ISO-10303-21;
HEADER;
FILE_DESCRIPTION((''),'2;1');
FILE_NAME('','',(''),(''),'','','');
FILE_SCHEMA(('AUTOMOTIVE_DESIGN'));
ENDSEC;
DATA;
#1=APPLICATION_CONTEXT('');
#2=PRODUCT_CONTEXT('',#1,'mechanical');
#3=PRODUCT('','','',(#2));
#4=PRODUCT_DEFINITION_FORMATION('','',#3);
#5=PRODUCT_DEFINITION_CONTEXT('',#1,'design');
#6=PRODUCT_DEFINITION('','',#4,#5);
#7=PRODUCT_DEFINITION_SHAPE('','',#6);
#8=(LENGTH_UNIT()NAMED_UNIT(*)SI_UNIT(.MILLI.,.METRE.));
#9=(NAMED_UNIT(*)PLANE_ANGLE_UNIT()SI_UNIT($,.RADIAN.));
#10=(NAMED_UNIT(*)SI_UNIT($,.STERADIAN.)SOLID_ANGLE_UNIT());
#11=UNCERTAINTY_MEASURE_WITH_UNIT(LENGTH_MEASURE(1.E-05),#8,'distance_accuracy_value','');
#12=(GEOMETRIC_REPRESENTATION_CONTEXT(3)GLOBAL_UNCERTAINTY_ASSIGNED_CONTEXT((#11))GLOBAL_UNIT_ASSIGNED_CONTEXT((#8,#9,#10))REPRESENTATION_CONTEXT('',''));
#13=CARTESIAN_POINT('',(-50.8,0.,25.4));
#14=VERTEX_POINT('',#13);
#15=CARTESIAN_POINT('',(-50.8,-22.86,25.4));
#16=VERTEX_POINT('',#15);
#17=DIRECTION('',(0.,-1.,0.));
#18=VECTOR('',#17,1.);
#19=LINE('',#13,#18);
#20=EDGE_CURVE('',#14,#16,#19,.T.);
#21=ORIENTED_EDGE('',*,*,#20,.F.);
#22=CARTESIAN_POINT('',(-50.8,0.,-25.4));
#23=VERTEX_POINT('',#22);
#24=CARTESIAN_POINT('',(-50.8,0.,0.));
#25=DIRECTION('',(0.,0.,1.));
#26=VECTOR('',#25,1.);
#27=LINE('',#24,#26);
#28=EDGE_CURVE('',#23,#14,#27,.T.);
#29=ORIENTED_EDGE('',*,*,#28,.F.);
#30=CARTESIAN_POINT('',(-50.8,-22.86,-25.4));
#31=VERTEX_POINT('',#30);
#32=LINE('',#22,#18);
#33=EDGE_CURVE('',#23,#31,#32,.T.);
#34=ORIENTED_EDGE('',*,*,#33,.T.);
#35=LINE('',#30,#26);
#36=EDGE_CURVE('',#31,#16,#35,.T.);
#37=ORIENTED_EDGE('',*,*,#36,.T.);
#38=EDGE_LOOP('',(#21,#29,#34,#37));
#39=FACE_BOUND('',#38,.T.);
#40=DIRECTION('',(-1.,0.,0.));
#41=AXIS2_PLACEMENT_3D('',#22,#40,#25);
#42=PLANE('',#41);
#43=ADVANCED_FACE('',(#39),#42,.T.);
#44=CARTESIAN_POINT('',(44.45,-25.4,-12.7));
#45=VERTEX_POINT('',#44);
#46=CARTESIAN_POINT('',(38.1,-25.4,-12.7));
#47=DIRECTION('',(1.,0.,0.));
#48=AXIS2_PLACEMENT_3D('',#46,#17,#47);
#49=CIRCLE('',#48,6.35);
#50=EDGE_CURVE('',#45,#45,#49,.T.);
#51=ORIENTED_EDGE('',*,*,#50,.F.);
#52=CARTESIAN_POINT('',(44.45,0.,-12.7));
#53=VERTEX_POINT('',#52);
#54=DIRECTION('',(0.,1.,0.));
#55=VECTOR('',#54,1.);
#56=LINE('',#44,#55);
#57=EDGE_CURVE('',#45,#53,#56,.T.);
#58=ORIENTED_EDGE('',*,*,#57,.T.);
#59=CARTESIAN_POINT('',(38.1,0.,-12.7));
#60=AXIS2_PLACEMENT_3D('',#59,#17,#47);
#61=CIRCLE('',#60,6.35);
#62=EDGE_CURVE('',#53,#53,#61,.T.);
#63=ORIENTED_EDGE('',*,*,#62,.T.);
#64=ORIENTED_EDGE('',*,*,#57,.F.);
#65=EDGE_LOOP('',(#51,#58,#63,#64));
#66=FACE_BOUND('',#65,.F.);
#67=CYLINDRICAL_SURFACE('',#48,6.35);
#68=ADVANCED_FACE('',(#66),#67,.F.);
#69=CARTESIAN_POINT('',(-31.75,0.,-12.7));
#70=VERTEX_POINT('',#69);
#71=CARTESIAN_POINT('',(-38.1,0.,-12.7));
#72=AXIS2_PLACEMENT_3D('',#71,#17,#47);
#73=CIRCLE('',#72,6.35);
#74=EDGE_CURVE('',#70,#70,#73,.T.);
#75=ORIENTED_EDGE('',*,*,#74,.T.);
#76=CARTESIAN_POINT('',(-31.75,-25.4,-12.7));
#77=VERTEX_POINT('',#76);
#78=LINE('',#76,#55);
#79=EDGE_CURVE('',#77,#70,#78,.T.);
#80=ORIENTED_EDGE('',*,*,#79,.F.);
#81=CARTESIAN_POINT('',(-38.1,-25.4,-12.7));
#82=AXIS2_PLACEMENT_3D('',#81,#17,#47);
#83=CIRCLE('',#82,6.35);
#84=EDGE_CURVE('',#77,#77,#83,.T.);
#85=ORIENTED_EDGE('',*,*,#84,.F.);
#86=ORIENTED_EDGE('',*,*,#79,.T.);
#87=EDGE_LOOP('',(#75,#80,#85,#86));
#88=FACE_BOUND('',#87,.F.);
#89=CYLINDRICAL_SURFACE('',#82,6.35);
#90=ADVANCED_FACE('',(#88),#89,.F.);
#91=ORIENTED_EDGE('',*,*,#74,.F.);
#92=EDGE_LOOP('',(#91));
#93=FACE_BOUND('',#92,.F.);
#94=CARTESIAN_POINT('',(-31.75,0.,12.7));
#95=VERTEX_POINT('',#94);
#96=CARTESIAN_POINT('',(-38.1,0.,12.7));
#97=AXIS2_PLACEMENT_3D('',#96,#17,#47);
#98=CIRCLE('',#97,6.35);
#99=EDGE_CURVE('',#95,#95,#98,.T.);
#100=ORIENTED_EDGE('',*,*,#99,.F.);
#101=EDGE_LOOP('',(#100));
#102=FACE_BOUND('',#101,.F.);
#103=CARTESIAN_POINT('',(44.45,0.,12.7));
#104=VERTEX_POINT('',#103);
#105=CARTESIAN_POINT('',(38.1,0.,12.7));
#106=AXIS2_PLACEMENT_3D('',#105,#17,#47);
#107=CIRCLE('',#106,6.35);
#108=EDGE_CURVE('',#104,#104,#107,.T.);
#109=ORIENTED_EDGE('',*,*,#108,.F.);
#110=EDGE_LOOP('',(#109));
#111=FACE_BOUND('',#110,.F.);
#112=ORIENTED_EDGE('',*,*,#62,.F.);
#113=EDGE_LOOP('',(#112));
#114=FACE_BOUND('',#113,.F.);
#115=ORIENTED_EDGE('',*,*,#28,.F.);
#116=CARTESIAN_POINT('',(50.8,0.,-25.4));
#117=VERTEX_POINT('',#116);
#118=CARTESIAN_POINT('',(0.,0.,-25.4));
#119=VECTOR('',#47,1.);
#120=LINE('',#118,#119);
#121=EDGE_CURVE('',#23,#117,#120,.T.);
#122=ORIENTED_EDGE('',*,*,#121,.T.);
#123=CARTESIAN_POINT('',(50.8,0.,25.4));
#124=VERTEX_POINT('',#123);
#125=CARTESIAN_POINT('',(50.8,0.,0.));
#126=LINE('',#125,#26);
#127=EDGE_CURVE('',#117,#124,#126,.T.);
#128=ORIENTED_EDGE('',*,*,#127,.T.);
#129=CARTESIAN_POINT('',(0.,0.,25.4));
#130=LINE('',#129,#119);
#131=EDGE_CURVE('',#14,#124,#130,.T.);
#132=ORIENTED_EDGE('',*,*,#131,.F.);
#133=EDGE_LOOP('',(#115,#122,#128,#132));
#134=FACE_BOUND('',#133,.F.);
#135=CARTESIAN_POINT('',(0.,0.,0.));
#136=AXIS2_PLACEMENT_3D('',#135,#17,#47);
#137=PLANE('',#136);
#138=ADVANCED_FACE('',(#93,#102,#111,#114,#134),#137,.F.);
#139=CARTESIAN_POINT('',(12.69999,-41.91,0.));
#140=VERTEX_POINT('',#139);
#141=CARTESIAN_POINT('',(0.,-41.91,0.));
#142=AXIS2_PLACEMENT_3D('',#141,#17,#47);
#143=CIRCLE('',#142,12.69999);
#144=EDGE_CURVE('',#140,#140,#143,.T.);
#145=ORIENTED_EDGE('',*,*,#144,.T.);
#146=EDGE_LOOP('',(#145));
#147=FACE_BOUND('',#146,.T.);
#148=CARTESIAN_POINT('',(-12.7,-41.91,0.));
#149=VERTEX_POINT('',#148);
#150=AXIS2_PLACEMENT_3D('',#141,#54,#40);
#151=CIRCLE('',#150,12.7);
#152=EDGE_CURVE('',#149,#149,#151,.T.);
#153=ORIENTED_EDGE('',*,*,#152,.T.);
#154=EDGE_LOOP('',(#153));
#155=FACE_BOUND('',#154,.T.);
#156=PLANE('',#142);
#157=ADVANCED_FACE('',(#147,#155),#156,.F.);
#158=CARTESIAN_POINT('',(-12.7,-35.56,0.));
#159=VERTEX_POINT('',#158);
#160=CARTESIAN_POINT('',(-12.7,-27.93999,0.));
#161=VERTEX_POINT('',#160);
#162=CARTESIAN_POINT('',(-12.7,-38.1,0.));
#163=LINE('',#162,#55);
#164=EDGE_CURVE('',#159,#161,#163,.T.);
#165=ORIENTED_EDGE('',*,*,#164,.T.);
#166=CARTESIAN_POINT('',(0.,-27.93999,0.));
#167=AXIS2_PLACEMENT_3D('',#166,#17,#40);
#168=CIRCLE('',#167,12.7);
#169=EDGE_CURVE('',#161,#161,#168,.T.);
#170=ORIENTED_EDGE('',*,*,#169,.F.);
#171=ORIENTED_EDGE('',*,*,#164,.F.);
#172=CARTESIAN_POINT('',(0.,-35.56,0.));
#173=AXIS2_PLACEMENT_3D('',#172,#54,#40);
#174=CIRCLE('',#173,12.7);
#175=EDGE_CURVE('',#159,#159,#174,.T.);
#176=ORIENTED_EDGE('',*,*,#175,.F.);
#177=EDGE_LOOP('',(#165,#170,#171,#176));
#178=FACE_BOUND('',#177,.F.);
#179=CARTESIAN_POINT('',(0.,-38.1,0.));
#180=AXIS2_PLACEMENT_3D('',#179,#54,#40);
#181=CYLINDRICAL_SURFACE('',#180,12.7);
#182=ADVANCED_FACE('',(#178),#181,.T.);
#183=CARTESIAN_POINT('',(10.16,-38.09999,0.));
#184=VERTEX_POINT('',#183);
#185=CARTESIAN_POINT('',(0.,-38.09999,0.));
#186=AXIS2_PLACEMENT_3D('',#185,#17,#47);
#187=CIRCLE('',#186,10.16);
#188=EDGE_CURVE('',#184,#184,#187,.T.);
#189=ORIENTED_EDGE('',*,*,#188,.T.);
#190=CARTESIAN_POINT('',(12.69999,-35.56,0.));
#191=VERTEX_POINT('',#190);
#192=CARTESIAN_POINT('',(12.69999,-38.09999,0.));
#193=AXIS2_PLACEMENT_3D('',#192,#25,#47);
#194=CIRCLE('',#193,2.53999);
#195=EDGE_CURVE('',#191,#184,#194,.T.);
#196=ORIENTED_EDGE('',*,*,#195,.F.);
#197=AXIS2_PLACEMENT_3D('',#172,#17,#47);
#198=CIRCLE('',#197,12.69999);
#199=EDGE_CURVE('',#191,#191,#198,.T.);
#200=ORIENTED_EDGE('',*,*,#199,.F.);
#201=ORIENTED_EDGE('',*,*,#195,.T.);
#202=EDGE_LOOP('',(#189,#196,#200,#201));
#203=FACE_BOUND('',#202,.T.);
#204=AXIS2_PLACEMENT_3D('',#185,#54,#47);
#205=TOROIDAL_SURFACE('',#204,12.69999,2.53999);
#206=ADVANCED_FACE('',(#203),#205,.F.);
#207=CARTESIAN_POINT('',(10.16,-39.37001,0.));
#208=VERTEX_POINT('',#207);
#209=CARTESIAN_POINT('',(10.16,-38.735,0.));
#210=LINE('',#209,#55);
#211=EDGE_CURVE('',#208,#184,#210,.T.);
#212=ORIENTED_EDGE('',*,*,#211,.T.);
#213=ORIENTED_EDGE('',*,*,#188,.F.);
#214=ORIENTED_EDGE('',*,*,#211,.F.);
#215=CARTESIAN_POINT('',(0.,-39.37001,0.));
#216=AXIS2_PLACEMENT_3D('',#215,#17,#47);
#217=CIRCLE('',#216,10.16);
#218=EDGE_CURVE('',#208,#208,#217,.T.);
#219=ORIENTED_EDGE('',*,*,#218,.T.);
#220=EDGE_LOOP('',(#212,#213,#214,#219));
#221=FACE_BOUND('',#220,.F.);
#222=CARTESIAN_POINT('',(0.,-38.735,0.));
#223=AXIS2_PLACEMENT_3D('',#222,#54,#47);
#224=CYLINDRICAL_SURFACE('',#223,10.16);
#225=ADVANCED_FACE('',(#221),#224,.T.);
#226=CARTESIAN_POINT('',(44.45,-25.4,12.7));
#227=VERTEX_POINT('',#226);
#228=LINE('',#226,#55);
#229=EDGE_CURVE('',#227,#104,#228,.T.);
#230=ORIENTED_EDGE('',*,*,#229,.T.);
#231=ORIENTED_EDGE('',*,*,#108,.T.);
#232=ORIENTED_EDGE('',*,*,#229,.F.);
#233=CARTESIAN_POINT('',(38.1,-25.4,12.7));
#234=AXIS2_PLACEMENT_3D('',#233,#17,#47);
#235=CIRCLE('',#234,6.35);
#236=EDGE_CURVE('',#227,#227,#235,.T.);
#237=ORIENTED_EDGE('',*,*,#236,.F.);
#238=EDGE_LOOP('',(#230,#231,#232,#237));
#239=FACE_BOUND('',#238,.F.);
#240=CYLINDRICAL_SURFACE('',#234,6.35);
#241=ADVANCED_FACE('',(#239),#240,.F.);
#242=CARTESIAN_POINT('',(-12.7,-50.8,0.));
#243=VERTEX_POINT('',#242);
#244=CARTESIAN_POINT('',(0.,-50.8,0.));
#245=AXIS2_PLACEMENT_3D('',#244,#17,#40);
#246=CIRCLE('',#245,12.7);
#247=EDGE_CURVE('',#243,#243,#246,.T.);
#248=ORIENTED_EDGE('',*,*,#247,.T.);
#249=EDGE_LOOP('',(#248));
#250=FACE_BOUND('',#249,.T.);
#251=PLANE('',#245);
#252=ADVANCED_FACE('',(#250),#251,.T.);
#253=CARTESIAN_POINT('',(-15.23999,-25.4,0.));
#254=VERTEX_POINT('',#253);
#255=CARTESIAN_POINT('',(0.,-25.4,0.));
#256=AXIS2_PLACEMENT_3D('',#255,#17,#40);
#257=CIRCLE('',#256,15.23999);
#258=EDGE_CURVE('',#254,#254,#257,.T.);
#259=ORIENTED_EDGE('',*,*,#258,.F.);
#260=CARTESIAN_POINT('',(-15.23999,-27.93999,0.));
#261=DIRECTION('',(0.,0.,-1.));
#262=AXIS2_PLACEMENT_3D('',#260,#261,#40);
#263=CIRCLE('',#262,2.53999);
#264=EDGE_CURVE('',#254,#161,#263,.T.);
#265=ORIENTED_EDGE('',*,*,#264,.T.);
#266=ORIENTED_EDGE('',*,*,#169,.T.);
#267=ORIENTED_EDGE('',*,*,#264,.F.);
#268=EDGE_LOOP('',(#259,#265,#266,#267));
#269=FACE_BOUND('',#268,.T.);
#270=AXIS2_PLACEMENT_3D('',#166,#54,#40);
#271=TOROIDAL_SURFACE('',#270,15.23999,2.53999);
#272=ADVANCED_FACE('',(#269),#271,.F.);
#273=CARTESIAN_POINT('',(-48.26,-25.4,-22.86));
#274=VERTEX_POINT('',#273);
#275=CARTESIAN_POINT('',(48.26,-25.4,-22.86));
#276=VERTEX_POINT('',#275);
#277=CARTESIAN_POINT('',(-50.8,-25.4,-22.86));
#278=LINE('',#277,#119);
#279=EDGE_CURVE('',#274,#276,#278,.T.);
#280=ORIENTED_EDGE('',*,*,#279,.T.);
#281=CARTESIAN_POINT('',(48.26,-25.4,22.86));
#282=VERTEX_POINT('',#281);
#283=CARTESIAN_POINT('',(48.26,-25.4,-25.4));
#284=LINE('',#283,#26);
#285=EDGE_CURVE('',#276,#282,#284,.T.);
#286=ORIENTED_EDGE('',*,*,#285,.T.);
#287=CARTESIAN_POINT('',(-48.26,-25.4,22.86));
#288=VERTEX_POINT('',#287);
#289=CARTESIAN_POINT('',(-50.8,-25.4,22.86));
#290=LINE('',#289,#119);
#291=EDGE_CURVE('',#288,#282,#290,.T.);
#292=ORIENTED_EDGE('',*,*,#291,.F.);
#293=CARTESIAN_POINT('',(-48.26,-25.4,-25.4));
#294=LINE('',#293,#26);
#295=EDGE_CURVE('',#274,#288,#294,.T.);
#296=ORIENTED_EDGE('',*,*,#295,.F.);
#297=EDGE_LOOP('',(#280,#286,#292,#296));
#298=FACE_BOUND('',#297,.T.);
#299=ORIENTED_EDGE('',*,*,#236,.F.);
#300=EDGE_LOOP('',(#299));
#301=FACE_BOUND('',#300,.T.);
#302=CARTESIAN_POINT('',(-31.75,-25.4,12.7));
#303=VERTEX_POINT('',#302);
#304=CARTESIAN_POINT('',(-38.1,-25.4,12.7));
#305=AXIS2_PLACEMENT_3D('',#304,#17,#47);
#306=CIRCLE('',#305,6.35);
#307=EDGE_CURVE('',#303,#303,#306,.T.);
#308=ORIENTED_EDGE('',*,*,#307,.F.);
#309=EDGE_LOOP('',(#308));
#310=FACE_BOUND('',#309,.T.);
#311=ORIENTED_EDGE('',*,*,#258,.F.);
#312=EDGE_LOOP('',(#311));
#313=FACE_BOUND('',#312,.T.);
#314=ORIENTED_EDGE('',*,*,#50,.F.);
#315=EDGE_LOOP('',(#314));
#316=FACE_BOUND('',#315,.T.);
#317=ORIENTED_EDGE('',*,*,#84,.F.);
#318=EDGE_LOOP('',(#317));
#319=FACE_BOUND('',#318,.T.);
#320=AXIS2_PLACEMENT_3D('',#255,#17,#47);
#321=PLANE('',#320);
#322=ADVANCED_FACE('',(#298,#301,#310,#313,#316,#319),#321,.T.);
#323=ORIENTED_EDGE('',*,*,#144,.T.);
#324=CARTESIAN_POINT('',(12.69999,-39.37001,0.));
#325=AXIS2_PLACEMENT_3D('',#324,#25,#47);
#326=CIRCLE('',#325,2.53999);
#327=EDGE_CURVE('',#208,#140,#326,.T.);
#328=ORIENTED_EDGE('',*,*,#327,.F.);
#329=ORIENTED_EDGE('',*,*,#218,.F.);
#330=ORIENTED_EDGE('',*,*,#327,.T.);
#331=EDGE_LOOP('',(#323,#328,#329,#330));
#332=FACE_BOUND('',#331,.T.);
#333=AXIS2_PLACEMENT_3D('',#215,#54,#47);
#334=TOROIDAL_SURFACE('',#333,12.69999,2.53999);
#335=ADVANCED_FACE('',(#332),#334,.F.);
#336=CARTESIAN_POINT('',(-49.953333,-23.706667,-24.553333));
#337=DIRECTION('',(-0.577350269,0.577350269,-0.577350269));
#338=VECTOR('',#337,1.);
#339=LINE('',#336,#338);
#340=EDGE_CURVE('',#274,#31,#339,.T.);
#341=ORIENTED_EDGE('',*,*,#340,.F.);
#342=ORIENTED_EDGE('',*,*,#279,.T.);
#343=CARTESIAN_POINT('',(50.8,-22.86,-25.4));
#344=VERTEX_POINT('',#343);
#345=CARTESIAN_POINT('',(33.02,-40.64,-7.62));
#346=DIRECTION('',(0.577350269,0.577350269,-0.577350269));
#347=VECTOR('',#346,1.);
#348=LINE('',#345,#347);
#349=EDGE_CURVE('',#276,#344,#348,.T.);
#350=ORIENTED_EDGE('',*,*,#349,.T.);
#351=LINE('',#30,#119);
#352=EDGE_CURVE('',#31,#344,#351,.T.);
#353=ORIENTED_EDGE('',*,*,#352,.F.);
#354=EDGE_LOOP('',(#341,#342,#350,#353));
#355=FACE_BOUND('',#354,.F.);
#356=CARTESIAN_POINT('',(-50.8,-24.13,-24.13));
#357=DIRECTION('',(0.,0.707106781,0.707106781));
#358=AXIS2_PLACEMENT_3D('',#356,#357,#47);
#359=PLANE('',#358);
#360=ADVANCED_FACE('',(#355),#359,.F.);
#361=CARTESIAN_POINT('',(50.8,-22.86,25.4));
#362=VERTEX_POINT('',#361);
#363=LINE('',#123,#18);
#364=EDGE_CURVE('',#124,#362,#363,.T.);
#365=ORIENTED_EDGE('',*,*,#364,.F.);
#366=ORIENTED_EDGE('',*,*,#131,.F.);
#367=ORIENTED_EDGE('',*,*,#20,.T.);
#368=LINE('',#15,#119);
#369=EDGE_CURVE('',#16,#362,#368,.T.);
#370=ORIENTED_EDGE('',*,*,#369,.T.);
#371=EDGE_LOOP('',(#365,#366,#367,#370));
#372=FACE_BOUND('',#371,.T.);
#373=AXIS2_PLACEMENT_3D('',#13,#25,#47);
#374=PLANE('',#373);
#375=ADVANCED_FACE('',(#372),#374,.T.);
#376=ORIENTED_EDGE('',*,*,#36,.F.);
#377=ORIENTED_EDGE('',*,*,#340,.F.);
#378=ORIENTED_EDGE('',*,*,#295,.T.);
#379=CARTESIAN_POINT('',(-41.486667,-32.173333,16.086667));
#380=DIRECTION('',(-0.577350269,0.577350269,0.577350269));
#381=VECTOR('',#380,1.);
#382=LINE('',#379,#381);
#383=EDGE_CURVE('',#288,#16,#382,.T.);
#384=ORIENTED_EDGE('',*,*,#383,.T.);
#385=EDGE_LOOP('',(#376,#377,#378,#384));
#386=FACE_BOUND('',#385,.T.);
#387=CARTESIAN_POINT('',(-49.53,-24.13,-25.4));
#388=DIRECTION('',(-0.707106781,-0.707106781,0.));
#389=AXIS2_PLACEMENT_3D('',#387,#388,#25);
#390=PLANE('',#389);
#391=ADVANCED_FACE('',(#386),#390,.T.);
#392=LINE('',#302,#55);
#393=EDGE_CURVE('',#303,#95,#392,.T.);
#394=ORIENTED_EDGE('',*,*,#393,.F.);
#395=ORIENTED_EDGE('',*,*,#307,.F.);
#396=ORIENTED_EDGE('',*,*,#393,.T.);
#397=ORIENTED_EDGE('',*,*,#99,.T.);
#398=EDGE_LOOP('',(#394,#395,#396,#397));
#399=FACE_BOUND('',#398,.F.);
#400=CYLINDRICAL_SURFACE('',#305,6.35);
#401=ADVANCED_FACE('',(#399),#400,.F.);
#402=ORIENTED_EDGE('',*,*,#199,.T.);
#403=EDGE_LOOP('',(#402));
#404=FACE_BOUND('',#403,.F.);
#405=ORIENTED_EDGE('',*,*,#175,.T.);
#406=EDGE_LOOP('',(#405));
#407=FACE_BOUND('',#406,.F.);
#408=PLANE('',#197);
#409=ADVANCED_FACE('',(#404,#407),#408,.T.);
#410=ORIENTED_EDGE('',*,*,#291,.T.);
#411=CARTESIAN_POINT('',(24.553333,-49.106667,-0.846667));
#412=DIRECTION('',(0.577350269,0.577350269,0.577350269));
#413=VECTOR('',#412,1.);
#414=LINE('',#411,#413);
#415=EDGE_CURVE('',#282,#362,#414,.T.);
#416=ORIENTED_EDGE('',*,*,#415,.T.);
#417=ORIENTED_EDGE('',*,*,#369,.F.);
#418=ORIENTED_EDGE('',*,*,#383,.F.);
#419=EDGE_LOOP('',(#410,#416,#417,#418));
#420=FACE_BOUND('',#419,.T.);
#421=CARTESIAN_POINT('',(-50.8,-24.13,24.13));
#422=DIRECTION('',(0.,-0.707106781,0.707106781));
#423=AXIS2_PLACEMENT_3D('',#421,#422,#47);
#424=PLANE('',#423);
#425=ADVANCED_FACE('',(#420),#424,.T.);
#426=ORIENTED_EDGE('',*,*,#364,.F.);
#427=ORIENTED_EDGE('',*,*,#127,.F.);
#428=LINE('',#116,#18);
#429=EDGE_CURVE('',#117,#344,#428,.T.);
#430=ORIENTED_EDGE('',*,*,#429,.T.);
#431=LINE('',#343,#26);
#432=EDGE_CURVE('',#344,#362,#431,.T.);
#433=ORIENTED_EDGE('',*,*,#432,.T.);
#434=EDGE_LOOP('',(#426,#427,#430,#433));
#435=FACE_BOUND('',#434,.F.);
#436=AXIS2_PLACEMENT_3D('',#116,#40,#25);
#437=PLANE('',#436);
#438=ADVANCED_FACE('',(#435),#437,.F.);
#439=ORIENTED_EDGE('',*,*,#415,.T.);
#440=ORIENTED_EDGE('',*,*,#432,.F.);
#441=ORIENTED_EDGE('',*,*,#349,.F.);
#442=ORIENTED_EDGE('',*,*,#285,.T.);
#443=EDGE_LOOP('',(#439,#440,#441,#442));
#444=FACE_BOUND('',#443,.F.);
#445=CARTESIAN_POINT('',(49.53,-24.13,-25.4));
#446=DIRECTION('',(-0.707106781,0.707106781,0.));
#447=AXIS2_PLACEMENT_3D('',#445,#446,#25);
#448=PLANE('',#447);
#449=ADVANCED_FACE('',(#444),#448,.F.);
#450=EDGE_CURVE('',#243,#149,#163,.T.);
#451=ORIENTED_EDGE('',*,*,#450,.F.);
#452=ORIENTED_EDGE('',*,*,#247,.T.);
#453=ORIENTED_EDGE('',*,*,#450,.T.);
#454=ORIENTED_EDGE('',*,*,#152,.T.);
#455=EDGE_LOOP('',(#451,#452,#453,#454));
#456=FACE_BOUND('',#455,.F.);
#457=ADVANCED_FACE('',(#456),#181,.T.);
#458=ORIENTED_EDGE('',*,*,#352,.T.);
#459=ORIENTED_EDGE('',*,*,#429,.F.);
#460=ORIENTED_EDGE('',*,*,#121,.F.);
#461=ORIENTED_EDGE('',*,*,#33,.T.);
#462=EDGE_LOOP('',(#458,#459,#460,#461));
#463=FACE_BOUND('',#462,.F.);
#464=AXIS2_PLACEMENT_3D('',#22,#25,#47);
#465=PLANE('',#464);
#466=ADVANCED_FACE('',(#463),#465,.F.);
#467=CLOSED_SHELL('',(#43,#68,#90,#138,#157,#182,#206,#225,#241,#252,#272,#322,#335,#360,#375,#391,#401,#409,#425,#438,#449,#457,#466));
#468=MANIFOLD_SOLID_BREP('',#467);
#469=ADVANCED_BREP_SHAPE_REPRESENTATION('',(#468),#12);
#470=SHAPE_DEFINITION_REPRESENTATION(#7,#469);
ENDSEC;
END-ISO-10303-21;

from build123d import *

# Parameters (mm, degrees)
F0_W     = 101.6
F0_H     = 50.8
F1_DEPTH = 25.4
F2_R     = 6.35
F3_DEPTH = 25.401
F4_W     = 12.7
F4_H     = 25.4
F6_W     = 12.0790981405
F6_H     = 6.35
F8_R     = 2.53999
F9_SIZE  = 2.54


# Not quite as in the source:
# - a fillet or chamfer is up to 0.001 mm smaller than in the source, because OpenCascade refuses the exact size


with BuildPart() as f1:
    # F0 (on Front) → F1 (new body)
    with BuildSketch(Plane.XZ):
        Rectangle(F0_W, F0_H)
    extrude(amount=F1_DEPTH)

    # F2 (on face) → F3 (cut, through all)
    with BuildSketch(Plane.XZ.offset(25.4)):
        with Locations((-38.1, 12.7)):
            Circle(F2_R)
        with Locations((-38.1, -12.7)):
            Circle(F2_R)
        with Locations((38.1, 12.7)):
            Circle(F2_R)
        with Locations((38.1, -12.7)):
            Circle(F2_R)
    extrude(amount=-F3_DEPTH, mode=Mode.SUBTRACT)

    # F4 (on Top) → F5 (revolve)
    with BuildSketch(Plane.XY):
        with Locations((-6.35, -38.1)):
            Rectangle(F4_W, F4_H)
    revolve(axis=Axis((0, -38.1, 0), (0, -1, 0)))

    # F6 (on Top) → F7 (revolve, cut)
    with BuildSketch(Plane.XY):
        with Locations((16.1995490702, -38.735)):
            Rectangle(F6_W, F6_H)
    revolve(axis=Axis((0, -40.3367578983, 0), (0, -1, 0)), mode=Mode.SUBTRACT)

    # F8 (radius 2.54 in the source; OpenCascade refuses exactly that, so slightly less here)
    f8_edges = [f1.edges().sort_by_distance(p)[0] for p in [
        (12.7, -25.4, 0),
        (-10.16, -41.91, 0),
        (-10.16, -35.56, 0),
    ]]
    fillet(f8_edges, radius=F8_R)

    # F9
    f9_edges = [f1.edges().sort_by_distance(p)[0] for p in [
        (0, -25.4, 25.4),
        (-50.8, -25.4, 0),
        (0, -25.4, -25.4),
        (50.8, -25.4, 0),
    ]]
    chamfer(f9_edges, length=F9_SIZE)


solid = f1.part
